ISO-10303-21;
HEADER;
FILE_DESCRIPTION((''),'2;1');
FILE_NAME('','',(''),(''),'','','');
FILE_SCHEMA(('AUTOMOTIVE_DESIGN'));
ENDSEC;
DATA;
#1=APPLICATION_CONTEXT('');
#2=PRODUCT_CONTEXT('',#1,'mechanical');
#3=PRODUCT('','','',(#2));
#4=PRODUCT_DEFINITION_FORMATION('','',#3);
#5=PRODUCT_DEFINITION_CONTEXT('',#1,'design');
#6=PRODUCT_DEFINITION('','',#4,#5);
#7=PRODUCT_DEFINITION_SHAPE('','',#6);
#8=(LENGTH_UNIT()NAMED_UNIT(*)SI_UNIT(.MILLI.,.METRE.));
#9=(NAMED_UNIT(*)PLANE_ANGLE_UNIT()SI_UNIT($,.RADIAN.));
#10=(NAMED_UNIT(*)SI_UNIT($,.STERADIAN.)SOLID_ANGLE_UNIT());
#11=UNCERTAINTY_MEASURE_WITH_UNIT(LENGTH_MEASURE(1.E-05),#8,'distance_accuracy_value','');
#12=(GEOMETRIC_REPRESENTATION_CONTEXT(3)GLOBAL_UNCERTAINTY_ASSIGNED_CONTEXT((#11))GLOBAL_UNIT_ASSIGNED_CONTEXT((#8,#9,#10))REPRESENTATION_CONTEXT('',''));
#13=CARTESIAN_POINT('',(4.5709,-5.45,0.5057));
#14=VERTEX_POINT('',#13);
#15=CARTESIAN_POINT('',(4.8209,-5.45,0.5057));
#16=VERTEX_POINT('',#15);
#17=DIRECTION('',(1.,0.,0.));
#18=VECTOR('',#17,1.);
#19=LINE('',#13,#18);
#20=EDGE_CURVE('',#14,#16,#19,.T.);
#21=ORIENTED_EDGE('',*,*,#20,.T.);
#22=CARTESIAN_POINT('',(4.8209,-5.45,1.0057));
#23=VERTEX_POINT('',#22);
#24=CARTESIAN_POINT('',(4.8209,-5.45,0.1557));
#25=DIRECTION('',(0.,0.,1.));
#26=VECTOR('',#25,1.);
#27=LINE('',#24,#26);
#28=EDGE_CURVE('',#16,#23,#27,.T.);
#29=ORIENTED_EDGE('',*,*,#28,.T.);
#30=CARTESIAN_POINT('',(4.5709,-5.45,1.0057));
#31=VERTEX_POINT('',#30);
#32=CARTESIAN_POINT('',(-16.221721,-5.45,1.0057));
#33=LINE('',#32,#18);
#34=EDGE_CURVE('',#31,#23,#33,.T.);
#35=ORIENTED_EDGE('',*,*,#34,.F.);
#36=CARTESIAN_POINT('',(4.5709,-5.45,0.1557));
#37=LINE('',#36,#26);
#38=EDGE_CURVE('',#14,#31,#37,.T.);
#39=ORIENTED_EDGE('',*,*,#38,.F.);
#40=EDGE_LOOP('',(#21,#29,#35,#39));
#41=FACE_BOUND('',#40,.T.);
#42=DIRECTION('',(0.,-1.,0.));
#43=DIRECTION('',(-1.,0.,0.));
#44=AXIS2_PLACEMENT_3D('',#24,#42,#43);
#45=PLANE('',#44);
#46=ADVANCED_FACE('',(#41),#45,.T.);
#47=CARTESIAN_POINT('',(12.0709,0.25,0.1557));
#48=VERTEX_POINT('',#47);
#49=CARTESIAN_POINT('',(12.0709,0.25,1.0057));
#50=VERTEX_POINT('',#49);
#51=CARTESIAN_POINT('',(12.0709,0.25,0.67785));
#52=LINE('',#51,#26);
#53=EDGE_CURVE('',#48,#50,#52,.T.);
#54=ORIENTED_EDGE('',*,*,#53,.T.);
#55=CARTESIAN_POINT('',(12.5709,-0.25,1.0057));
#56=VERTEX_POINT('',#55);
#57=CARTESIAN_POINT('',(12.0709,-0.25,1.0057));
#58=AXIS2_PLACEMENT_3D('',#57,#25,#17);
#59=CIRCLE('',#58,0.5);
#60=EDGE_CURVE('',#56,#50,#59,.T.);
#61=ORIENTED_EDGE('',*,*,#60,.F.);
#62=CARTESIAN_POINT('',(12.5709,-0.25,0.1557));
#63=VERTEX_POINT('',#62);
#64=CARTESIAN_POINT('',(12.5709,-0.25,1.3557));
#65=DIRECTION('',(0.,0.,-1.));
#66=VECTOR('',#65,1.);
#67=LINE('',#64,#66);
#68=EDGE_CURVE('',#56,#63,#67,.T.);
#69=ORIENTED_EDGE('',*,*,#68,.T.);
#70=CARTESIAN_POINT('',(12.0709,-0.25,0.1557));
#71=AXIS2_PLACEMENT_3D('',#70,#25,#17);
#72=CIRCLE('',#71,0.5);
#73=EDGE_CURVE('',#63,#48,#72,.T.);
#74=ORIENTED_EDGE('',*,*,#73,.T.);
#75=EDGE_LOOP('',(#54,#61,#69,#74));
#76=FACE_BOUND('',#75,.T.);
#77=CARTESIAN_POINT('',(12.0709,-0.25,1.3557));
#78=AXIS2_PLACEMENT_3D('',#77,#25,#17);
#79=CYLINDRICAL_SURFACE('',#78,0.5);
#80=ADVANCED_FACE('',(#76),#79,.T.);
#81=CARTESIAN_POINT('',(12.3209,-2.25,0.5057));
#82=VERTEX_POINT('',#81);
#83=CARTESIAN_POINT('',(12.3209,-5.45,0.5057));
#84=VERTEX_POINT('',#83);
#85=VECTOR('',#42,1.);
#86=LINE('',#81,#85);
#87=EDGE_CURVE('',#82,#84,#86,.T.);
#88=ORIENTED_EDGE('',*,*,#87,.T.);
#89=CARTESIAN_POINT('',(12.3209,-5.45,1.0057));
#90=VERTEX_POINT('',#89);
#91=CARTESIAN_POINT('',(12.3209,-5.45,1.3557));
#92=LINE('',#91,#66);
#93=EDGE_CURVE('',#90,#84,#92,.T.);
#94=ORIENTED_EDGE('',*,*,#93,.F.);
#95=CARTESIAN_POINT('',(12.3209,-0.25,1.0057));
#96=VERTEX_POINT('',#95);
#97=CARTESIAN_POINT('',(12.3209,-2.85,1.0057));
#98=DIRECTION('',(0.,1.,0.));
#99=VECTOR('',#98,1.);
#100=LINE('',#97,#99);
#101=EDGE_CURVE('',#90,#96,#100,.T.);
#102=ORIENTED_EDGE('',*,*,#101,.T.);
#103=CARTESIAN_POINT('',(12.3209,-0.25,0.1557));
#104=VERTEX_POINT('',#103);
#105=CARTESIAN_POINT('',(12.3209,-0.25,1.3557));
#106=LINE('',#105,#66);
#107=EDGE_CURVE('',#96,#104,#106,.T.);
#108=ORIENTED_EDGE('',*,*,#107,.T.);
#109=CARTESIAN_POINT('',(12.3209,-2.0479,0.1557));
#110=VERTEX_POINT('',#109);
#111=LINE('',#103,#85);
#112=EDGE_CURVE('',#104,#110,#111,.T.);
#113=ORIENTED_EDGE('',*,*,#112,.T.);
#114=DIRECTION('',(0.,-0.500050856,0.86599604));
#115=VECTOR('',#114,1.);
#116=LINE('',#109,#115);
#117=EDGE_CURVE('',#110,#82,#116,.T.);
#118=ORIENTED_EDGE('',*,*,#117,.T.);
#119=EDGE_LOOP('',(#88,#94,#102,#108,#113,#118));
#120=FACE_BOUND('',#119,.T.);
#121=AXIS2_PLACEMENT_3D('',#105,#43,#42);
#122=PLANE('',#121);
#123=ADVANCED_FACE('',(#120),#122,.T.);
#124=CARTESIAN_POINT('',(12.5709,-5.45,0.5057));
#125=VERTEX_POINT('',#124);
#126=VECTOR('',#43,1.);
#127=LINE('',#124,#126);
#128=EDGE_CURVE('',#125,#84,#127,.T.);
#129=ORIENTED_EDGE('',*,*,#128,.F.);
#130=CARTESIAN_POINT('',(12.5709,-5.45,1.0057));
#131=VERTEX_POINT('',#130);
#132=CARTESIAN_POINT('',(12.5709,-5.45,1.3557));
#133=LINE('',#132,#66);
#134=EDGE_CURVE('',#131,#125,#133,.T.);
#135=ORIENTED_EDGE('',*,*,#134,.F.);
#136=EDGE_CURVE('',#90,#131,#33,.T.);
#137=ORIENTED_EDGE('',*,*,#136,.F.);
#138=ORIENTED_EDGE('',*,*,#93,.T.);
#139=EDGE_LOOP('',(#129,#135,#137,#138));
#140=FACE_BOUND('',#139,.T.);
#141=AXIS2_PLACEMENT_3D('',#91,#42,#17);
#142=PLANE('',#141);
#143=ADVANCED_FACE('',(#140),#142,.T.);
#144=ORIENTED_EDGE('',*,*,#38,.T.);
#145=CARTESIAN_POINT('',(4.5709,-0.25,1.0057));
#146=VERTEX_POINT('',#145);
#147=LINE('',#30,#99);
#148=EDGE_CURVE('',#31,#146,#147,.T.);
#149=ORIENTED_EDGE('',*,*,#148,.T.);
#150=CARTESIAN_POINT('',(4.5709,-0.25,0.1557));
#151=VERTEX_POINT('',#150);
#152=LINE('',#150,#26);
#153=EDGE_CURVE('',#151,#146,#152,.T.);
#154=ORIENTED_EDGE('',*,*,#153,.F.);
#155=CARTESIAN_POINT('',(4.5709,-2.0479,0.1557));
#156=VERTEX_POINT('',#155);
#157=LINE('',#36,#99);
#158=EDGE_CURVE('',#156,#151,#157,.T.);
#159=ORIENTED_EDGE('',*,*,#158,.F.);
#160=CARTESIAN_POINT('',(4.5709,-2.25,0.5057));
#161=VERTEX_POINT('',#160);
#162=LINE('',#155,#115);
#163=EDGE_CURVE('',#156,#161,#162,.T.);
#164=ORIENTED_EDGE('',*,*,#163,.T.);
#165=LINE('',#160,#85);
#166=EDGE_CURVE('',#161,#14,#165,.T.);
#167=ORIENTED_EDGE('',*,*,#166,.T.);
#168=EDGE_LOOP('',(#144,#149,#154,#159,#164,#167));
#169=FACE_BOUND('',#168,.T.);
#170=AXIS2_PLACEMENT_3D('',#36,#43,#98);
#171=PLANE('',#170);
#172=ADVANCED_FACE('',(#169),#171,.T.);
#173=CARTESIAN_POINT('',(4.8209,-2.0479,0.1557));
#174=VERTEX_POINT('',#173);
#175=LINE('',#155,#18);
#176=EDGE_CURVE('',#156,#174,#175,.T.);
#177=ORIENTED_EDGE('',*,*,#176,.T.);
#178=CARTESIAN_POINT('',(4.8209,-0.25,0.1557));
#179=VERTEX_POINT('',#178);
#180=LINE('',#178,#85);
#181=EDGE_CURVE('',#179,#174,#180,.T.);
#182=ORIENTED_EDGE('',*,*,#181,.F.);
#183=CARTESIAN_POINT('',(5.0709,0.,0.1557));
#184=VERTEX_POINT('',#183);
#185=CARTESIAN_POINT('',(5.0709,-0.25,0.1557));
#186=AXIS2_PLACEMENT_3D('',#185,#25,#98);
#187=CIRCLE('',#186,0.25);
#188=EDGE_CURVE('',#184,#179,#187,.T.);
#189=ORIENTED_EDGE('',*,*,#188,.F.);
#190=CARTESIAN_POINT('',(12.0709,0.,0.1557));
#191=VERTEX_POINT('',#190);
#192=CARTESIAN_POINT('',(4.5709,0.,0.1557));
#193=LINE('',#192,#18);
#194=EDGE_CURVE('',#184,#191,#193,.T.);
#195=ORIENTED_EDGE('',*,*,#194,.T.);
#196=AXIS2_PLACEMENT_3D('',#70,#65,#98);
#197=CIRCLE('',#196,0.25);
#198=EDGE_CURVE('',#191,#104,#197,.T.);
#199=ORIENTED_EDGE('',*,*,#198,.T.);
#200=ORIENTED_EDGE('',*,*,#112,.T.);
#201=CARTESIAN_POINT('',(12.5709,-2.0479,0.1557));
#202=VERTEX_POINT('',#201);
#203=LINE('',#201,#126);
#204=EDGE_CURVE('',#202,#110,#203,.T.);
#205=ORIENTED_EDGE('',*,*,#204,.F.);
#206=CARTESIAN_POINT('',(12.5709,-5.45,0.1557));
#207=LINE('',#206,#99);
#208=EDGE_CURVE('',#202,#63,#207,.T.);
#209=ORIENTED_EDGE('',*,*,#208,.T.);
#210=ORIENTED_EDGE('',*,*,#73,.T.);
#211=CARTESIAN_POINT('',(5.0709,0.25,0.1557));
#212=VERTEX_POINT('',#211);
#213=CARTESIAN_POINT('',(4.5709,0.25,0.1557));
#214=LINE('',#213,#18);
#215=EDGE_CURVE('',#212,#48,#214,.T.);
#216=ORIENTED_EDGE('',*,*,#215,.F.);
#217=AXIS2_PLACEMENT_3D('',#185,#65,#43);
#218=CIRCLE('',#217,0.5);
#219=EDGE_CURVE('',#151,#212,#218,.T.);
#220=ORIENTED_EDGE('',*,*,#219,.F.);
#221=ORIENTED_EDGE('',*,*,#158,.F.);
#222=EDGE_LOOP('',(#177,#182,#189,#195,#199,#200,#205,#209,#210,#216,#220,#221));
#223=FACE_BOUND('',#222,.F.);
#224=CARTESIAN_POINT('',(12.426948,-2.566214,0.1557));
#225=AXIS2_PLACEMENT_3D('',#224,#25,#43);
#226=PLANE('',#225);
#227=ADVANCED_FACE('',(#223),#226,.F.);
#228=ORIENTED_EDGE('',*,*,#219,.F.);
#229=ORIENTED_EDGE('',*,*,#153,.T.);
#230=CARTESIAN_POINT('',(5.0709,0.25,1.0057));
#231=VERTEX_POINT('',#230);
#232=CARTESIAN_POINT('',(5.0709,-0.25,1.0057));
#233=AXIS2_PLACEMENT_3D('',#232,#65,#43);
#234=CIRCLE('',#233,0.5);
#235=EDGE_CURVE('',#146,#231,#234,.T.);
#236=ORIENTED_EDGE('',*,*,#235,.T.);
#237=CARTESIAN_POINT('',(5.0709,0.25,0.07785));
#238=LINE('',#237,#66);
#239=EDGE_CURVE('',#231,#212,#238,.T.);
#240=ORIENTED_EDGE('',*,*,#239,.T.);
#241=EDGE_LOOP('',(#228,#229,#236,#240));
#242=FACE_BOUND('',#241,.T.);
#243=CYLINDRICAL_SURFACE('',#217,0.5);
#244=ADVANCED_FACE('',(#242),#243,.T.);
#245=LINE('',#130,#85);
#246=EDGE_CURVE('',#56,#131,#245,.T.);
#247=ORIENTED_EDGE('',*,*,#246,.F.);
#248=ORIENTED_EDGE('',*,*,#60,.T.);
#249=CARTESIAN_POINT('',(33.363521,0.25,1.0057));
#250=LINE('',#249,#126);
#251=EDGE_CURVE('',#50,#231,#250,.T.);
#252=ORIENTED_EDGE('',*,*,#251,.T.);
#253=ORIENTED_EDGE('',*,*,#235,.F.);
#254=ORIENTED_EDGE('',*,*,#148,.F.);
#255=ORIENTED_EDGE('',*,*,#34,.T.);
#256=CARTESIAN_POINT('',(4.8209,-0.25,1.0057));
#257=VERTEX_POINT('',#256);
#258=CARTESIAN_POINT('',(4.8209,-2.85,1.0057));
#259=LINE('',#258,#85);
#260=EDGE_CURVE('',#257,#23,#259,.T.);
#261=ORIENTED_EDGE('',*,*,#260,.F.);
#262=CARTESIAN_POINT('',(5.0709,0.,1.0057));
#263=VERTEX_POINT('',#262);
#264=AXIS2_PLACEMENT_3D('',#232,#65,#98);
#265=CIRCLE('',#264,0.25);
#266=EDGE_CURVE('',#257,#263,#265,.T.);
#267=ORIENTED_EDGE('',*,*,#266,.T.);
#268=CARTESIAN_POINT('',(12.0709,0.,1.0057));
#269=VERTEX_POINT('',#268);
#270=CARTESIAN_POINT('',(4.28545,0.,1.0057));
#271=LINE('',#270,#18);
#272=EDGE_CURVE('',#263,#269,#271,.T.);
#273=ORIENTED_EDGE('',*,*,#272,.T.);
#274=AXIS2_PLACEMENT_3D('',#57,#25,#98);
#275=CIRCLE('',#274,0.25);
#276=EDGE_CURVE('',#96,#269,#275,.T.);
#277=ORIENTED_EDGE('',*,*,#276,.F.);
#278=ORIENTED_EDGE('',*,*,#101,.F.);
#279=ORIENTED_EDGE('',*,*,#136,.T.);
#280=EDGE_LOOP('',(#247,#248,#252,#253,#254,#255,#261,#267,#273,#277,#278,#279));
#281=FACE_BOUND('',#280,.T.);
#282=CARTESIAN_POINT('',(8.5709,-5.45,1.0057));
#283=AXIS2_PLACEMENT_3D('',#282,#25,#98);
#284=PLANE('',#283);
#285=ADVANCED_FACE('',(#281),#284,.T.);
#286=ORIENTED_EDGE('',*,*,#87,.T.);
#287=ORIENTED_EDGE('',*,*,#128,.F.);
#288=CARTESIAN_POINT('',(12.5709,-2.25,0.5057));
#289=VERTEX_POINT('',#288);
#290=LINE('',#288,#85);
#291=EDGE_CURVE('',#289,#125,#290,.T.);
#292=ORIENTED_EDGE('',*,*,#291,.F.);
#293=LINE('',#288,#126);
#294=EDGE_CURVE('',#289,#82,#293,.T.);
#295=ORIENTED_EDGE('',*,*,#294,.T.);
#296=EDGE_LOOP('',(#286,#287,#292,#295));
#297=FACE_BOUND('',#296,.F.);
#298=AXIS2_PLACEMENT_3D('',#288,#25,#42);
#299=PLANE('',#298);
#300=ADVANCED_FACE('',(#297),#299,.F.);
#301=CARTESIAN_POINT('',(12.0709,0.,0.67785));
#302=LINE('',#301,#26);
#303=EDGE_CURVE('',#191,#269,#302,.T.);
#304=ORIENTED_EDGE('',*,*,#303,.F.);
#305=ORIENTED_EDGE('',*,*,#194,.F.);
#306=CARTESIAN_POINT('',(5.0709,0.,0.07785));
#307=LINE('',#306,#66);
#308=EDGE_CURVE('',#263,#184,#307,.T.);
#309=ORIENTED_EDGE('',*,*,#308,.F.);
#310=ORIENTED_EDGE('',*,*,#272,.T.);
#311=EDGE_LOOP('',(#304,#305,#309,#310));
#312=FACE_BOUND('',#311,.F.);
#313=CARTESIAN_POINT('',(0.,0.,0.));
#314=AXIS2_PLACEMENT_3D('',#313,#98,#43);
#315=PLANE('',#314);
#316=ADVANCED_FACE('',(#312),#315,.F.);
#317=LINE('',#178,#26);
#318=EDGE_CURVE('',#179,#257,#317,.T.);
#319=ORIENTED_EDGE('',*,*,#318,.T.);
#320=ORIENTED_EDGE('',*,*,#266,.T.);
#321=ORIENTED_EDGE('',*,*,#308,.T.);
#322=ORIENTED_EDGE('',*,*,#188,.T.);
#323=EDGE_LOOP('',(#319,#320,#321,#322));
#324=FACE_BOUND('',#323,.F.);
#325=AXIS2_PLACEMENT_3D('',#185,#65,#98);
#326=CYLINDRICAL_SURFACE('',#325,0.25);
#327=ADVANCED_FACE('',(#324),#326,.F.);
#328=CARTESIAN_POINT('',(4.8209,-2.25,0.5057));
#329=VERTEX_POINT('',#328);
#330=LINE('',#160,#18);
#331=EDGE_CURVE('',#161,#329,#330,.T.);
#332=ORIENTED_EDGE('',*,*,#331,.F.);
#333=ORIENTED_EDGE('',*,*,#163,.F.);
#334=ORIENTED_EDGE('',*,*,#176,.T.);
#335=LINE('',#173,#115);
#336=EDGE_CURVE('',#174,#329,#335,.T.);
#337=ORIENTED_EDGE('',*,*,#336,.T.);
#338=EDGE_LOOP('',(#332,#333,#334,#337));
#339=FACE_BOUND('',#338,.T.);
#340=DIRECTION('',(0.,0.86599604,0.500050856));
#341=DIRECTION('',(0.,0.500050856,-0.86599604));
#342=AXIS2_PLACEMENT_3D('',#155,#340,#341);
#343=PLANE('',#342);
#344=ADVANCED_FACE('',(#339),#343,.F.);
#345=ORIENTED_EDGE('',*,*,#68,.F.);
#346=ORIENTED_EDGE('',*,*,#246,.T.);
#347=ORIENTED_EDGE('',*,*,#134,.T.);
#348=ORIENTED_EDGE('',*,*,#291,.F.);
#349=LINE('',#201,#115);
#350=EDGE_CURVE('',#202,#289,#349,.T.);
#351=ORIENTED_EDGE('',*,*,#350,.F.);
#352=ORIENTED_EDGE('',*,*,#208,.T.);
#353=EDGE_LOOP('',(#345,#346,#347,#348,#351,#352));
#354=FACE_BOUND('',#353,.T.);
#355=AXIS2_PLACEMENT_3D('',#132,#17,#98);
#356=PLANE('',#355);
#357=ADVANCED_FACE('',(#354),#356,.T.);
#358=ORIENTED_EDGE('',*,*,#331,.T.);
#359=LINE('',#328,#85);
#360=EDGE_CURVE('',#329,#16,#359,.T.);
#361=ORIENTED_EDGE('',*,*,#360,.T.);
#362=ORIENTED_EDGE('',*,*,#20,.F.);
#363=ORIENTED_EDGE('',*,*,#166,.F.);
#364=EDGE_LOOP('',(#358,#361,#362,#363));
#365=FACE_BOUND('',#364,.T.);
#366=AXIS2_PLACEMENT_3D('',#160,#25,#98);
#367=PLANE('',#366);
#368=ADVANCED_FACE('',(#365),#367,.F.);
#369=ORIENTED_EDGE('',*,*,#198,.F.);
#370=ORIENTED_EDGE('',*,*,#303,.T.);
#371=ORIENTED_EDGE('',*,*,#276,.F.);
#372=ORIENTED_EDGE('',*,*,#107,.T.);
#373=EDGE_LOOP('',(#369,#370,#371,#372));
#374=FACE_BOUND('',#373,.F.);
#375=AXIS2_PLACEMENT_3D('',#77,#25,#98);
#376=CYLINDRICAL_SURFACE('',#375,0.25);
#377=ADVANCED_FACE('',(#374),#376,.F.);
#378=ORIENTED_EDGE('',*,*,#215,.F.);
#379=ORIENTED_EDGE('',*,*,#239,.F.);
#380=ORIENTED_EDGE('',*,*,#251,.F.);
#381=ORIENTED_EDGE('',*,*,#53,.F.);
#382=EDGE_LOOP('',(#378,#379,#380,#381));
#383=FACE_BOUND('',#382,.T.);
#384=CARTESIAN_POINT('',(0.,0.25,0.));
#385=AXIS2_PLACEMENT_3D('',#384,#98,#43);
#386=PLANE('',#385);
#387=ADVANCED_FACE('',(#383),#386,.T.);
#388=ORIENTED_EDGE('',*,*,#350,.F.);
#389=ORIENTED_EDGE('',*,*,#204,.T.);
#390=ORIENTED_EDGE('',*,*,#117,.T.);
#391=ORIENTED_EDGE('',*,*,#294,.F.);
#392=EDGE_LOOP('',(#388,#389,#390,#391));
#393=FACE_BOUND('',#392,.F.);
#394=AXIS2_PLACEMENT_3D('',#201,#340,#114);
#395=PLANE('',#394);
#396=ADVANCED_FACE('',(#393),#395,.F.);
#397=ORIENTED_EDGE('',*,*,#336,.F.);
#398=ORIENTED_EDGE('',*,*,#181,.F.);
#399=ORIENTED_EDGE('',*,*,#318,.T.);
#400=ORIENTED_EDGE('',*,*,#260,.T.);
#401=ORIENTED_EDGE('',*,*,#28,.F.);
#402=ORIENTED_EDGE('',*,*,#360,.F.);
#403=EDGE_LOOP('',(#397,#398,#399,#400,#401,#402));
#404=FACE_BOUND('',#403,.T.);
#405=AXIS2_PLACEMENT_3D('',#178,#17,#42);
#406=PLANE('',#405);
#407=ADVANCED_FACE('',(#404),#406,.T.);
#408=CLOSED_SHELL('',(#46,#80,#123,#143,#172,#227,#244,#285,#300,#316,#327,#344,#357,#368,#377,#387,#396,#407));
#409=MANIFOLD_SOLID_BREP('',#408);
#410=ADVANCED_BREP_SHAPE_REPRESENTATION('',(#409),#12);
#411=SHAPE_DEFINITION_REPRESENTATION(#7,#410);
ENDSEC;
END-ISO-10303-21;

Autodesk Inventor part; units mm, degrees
ref_plane "YZ Plane" through (0, 0, 0) normal (1, 0, 0) x (0, 1, 0)
ref_plane "XZ Plane" through (0, 0, 0) normal (0, 1, 0) x (-1, 0, 0)
ref_plane "XY Plane" through (0, 0, 0) normal (0, 0, 1) x (1, 0, 0)
sketch "Sketch1" plane through (0, 0, 0) normal (0, 1, 0) x (-1, 0, 0)
  line L0 (-4.5709, 0.1557) -> (-12.5709, 0.1557)
  line L1 (-12.5709, 0.1557) -> (-12.5709, 1.3557)
  line L2 (-12.5709, 1.3557) -> (-4.5709, 1.3557)
  line L3 (-4.5709, 1.3557) -> (-4.5709, 0.1557)
  dimension "d27" = 8
  dimension "d28" = 1.2
extrude "Plate4" add sketch "Sketch1" along normal blind 0.25
sketch "Sketch5" plane through (12.3209, 0.25, 1.3557) normal (1, 0, 0) x (0, 1, 0)
  line L0 (0, -1.2) -> (0, 0)
  line L1 (0, 0) -> (-5.7, 0)
  line L2 (-5.7, 0) -> (-5.7, -1.2)
  line L3 (-5.7, -1.2) -> (0, -1.2)
edge flange "Flange4" height 5.7 angle 90 thickness 0.25 bend radius 0.25 thickness toward (1, 0, 0) relief tear relief width 0.25 relief depth 0.125 corner gap 0.25 corner form 0 edges at (12.5709, 0, 0.7557) (4.5709, 0, 0.7557) wall of the first edge with corners at (12.3209, 0.25, 0.1557) (12.3209, 0.25, 1.3557) (12.3209, -5.45, 1.3557) (12.3209, -5.45, 0.1557)
bend "Bend4"
corner "Corner4"
sketch "Sketch6" plane through (12.5709, -5.45, 1.3557) normal (1, 0, 0) x (0, 0, -1)
  line L0 (1.2, 0) -> (0, 0) projected
  line L1 (0.6, 0) -> (0.6, 5.2) construction
  line L2 (1.2, 5.2) -> (0, 5.2) projected
  line L3 (1.2, 3.4021) -> (0.85, 3.2)
  line L4 (0.85, 3.2) -> (0.85, 0)
  line L5 (1.2, 0) -> (0.85, 0)
  line L6 (1.2, 5.2) -> (1.2, 0) projected
  line L7 (1.2, 3.4021) -> (1.2, 0)
  line L8 (0, 5.7) -> (1.2, 5.7) projected
  point P0 (1.3557, 5.45)
  dimension "d52" = 3.2
  dimension "d54" = 0.25
  dimension "d56" = 2.5
extrude "Cut1" cut sketch "Sketch6" against normal blind 0.25
ref_plane "Work Plane1" through (12.5709, -0.25, 0.7557) normal (0, 0, -1) x (-1, 0, 0)
ref_plane "Work Plane2" through (8.5709, -5.45, 1.3557) normal (1, 0, 0) x (0, 0, -1)
mirror "Mirror2" about plane through (8.5709, -5.45, 1.3557) normal (1, 0, 0) of "Cut1"
sketch "Sketch7" plane through (8.5709, -5.45, 1.3557) normal (1, 0, 0) x (0, 0, -1)
  line L0 (0, 0) -> (0.85, 0) projected
  line L1 (0, 5.7) -> (1.2, 5.7) projected
  line L2 (0, 0) -> (0.35, 0)
  line L3 (0.35, 0) -> (0.35, 5.7)
  line L4 (0.35, 5.7) -> (0, 5.7)
  line L5 (0, 5.7) -> (0, 0)
  line L6 (1.2, 5.7) -> (1.2, 5.45) projected
  line L7 (1.2, 5.45) -> (0, 5.45) projected
  line L8 (0, 5.45) -> (0, 5.7) projected
  line L9 (0, 5.7) -> (1.2, 5.7) projected
  line L10 (0.6, 6.84) -> (0.6, -1.14) projected
  point P0 (1.3557, 5.45)
  dimension "d57" = 0.25
extrude "Cut2" cut sketch "Sketch7" along normal through all both and the other way through all contours L5 L7 L3 L0 | L5 L1 L3 L7
equation "\"d27\" = atmegaPinBaseWidth"
equation "\"d28\" = atmegaPinWidth1"
equation "\"d52\" = atmegaSeatingPlaneDistance"
equation "\"d54\" = 0.5 * atmegaPinWidth2"
equation "\"d50\" = Thickness"
equation "\"d57\" = 0.5 * atmegaPinWidth2"
equation "\"d58\" = Thickness"
equation "\"d29\" = Thickness"
equation "\"d40\" = BendReliefWidth"
equation "\"d41\" = BendReliefDepth"
equation "\"d42\" = MinimumRemnant"
equation "\"d43\" = TransitionRadius"
equation "\"d44\" = atmegaPinLenght"
equation "\"d46\" = BendRadius"
equation "\"d47\" = CornerReliefSize"
equation "\"d48\" = GapSize"
equation "\"d49\" = JacobiRadiusSize"
equation "\"BendRadius\" = Thickness"
equation "\"BendReliefWidth\" = Thickness"
equation "\"BendReliefDepth\" = 0.5 * Thickness"
equation "\"CornerReliefSize\" = 4 * Thickness"
equation "\"MinimumRemnant\" = 2 * Thickness"
equation "\"TransitionRadius\" = BendRadius"
equation "\"JacobiRadiusSize\" = BendRadius"
equation "\"GapSize\" = Thickness"
equation "\"atmegaPinThickness\" = 0.3"
equation "\"atmegaPinWidth1\" = 1.2"
equation "\"atmegaPinWidth2\" = 0.5"
equation "\"atmegaEndPinWidth\" = 0.9"
equation "\"atmegaPinBendAngle\" = 80deg"
equation "\"atmegaPinBaseWidth\" = 8"
equation "\"atmegaSeatingPlaneDistance\" = 3.2"
equation "\"Thickness\" = 0.25"
equation "\"atmegaPinLenght\" = 5.7"
properties part number "atmega_pin"
